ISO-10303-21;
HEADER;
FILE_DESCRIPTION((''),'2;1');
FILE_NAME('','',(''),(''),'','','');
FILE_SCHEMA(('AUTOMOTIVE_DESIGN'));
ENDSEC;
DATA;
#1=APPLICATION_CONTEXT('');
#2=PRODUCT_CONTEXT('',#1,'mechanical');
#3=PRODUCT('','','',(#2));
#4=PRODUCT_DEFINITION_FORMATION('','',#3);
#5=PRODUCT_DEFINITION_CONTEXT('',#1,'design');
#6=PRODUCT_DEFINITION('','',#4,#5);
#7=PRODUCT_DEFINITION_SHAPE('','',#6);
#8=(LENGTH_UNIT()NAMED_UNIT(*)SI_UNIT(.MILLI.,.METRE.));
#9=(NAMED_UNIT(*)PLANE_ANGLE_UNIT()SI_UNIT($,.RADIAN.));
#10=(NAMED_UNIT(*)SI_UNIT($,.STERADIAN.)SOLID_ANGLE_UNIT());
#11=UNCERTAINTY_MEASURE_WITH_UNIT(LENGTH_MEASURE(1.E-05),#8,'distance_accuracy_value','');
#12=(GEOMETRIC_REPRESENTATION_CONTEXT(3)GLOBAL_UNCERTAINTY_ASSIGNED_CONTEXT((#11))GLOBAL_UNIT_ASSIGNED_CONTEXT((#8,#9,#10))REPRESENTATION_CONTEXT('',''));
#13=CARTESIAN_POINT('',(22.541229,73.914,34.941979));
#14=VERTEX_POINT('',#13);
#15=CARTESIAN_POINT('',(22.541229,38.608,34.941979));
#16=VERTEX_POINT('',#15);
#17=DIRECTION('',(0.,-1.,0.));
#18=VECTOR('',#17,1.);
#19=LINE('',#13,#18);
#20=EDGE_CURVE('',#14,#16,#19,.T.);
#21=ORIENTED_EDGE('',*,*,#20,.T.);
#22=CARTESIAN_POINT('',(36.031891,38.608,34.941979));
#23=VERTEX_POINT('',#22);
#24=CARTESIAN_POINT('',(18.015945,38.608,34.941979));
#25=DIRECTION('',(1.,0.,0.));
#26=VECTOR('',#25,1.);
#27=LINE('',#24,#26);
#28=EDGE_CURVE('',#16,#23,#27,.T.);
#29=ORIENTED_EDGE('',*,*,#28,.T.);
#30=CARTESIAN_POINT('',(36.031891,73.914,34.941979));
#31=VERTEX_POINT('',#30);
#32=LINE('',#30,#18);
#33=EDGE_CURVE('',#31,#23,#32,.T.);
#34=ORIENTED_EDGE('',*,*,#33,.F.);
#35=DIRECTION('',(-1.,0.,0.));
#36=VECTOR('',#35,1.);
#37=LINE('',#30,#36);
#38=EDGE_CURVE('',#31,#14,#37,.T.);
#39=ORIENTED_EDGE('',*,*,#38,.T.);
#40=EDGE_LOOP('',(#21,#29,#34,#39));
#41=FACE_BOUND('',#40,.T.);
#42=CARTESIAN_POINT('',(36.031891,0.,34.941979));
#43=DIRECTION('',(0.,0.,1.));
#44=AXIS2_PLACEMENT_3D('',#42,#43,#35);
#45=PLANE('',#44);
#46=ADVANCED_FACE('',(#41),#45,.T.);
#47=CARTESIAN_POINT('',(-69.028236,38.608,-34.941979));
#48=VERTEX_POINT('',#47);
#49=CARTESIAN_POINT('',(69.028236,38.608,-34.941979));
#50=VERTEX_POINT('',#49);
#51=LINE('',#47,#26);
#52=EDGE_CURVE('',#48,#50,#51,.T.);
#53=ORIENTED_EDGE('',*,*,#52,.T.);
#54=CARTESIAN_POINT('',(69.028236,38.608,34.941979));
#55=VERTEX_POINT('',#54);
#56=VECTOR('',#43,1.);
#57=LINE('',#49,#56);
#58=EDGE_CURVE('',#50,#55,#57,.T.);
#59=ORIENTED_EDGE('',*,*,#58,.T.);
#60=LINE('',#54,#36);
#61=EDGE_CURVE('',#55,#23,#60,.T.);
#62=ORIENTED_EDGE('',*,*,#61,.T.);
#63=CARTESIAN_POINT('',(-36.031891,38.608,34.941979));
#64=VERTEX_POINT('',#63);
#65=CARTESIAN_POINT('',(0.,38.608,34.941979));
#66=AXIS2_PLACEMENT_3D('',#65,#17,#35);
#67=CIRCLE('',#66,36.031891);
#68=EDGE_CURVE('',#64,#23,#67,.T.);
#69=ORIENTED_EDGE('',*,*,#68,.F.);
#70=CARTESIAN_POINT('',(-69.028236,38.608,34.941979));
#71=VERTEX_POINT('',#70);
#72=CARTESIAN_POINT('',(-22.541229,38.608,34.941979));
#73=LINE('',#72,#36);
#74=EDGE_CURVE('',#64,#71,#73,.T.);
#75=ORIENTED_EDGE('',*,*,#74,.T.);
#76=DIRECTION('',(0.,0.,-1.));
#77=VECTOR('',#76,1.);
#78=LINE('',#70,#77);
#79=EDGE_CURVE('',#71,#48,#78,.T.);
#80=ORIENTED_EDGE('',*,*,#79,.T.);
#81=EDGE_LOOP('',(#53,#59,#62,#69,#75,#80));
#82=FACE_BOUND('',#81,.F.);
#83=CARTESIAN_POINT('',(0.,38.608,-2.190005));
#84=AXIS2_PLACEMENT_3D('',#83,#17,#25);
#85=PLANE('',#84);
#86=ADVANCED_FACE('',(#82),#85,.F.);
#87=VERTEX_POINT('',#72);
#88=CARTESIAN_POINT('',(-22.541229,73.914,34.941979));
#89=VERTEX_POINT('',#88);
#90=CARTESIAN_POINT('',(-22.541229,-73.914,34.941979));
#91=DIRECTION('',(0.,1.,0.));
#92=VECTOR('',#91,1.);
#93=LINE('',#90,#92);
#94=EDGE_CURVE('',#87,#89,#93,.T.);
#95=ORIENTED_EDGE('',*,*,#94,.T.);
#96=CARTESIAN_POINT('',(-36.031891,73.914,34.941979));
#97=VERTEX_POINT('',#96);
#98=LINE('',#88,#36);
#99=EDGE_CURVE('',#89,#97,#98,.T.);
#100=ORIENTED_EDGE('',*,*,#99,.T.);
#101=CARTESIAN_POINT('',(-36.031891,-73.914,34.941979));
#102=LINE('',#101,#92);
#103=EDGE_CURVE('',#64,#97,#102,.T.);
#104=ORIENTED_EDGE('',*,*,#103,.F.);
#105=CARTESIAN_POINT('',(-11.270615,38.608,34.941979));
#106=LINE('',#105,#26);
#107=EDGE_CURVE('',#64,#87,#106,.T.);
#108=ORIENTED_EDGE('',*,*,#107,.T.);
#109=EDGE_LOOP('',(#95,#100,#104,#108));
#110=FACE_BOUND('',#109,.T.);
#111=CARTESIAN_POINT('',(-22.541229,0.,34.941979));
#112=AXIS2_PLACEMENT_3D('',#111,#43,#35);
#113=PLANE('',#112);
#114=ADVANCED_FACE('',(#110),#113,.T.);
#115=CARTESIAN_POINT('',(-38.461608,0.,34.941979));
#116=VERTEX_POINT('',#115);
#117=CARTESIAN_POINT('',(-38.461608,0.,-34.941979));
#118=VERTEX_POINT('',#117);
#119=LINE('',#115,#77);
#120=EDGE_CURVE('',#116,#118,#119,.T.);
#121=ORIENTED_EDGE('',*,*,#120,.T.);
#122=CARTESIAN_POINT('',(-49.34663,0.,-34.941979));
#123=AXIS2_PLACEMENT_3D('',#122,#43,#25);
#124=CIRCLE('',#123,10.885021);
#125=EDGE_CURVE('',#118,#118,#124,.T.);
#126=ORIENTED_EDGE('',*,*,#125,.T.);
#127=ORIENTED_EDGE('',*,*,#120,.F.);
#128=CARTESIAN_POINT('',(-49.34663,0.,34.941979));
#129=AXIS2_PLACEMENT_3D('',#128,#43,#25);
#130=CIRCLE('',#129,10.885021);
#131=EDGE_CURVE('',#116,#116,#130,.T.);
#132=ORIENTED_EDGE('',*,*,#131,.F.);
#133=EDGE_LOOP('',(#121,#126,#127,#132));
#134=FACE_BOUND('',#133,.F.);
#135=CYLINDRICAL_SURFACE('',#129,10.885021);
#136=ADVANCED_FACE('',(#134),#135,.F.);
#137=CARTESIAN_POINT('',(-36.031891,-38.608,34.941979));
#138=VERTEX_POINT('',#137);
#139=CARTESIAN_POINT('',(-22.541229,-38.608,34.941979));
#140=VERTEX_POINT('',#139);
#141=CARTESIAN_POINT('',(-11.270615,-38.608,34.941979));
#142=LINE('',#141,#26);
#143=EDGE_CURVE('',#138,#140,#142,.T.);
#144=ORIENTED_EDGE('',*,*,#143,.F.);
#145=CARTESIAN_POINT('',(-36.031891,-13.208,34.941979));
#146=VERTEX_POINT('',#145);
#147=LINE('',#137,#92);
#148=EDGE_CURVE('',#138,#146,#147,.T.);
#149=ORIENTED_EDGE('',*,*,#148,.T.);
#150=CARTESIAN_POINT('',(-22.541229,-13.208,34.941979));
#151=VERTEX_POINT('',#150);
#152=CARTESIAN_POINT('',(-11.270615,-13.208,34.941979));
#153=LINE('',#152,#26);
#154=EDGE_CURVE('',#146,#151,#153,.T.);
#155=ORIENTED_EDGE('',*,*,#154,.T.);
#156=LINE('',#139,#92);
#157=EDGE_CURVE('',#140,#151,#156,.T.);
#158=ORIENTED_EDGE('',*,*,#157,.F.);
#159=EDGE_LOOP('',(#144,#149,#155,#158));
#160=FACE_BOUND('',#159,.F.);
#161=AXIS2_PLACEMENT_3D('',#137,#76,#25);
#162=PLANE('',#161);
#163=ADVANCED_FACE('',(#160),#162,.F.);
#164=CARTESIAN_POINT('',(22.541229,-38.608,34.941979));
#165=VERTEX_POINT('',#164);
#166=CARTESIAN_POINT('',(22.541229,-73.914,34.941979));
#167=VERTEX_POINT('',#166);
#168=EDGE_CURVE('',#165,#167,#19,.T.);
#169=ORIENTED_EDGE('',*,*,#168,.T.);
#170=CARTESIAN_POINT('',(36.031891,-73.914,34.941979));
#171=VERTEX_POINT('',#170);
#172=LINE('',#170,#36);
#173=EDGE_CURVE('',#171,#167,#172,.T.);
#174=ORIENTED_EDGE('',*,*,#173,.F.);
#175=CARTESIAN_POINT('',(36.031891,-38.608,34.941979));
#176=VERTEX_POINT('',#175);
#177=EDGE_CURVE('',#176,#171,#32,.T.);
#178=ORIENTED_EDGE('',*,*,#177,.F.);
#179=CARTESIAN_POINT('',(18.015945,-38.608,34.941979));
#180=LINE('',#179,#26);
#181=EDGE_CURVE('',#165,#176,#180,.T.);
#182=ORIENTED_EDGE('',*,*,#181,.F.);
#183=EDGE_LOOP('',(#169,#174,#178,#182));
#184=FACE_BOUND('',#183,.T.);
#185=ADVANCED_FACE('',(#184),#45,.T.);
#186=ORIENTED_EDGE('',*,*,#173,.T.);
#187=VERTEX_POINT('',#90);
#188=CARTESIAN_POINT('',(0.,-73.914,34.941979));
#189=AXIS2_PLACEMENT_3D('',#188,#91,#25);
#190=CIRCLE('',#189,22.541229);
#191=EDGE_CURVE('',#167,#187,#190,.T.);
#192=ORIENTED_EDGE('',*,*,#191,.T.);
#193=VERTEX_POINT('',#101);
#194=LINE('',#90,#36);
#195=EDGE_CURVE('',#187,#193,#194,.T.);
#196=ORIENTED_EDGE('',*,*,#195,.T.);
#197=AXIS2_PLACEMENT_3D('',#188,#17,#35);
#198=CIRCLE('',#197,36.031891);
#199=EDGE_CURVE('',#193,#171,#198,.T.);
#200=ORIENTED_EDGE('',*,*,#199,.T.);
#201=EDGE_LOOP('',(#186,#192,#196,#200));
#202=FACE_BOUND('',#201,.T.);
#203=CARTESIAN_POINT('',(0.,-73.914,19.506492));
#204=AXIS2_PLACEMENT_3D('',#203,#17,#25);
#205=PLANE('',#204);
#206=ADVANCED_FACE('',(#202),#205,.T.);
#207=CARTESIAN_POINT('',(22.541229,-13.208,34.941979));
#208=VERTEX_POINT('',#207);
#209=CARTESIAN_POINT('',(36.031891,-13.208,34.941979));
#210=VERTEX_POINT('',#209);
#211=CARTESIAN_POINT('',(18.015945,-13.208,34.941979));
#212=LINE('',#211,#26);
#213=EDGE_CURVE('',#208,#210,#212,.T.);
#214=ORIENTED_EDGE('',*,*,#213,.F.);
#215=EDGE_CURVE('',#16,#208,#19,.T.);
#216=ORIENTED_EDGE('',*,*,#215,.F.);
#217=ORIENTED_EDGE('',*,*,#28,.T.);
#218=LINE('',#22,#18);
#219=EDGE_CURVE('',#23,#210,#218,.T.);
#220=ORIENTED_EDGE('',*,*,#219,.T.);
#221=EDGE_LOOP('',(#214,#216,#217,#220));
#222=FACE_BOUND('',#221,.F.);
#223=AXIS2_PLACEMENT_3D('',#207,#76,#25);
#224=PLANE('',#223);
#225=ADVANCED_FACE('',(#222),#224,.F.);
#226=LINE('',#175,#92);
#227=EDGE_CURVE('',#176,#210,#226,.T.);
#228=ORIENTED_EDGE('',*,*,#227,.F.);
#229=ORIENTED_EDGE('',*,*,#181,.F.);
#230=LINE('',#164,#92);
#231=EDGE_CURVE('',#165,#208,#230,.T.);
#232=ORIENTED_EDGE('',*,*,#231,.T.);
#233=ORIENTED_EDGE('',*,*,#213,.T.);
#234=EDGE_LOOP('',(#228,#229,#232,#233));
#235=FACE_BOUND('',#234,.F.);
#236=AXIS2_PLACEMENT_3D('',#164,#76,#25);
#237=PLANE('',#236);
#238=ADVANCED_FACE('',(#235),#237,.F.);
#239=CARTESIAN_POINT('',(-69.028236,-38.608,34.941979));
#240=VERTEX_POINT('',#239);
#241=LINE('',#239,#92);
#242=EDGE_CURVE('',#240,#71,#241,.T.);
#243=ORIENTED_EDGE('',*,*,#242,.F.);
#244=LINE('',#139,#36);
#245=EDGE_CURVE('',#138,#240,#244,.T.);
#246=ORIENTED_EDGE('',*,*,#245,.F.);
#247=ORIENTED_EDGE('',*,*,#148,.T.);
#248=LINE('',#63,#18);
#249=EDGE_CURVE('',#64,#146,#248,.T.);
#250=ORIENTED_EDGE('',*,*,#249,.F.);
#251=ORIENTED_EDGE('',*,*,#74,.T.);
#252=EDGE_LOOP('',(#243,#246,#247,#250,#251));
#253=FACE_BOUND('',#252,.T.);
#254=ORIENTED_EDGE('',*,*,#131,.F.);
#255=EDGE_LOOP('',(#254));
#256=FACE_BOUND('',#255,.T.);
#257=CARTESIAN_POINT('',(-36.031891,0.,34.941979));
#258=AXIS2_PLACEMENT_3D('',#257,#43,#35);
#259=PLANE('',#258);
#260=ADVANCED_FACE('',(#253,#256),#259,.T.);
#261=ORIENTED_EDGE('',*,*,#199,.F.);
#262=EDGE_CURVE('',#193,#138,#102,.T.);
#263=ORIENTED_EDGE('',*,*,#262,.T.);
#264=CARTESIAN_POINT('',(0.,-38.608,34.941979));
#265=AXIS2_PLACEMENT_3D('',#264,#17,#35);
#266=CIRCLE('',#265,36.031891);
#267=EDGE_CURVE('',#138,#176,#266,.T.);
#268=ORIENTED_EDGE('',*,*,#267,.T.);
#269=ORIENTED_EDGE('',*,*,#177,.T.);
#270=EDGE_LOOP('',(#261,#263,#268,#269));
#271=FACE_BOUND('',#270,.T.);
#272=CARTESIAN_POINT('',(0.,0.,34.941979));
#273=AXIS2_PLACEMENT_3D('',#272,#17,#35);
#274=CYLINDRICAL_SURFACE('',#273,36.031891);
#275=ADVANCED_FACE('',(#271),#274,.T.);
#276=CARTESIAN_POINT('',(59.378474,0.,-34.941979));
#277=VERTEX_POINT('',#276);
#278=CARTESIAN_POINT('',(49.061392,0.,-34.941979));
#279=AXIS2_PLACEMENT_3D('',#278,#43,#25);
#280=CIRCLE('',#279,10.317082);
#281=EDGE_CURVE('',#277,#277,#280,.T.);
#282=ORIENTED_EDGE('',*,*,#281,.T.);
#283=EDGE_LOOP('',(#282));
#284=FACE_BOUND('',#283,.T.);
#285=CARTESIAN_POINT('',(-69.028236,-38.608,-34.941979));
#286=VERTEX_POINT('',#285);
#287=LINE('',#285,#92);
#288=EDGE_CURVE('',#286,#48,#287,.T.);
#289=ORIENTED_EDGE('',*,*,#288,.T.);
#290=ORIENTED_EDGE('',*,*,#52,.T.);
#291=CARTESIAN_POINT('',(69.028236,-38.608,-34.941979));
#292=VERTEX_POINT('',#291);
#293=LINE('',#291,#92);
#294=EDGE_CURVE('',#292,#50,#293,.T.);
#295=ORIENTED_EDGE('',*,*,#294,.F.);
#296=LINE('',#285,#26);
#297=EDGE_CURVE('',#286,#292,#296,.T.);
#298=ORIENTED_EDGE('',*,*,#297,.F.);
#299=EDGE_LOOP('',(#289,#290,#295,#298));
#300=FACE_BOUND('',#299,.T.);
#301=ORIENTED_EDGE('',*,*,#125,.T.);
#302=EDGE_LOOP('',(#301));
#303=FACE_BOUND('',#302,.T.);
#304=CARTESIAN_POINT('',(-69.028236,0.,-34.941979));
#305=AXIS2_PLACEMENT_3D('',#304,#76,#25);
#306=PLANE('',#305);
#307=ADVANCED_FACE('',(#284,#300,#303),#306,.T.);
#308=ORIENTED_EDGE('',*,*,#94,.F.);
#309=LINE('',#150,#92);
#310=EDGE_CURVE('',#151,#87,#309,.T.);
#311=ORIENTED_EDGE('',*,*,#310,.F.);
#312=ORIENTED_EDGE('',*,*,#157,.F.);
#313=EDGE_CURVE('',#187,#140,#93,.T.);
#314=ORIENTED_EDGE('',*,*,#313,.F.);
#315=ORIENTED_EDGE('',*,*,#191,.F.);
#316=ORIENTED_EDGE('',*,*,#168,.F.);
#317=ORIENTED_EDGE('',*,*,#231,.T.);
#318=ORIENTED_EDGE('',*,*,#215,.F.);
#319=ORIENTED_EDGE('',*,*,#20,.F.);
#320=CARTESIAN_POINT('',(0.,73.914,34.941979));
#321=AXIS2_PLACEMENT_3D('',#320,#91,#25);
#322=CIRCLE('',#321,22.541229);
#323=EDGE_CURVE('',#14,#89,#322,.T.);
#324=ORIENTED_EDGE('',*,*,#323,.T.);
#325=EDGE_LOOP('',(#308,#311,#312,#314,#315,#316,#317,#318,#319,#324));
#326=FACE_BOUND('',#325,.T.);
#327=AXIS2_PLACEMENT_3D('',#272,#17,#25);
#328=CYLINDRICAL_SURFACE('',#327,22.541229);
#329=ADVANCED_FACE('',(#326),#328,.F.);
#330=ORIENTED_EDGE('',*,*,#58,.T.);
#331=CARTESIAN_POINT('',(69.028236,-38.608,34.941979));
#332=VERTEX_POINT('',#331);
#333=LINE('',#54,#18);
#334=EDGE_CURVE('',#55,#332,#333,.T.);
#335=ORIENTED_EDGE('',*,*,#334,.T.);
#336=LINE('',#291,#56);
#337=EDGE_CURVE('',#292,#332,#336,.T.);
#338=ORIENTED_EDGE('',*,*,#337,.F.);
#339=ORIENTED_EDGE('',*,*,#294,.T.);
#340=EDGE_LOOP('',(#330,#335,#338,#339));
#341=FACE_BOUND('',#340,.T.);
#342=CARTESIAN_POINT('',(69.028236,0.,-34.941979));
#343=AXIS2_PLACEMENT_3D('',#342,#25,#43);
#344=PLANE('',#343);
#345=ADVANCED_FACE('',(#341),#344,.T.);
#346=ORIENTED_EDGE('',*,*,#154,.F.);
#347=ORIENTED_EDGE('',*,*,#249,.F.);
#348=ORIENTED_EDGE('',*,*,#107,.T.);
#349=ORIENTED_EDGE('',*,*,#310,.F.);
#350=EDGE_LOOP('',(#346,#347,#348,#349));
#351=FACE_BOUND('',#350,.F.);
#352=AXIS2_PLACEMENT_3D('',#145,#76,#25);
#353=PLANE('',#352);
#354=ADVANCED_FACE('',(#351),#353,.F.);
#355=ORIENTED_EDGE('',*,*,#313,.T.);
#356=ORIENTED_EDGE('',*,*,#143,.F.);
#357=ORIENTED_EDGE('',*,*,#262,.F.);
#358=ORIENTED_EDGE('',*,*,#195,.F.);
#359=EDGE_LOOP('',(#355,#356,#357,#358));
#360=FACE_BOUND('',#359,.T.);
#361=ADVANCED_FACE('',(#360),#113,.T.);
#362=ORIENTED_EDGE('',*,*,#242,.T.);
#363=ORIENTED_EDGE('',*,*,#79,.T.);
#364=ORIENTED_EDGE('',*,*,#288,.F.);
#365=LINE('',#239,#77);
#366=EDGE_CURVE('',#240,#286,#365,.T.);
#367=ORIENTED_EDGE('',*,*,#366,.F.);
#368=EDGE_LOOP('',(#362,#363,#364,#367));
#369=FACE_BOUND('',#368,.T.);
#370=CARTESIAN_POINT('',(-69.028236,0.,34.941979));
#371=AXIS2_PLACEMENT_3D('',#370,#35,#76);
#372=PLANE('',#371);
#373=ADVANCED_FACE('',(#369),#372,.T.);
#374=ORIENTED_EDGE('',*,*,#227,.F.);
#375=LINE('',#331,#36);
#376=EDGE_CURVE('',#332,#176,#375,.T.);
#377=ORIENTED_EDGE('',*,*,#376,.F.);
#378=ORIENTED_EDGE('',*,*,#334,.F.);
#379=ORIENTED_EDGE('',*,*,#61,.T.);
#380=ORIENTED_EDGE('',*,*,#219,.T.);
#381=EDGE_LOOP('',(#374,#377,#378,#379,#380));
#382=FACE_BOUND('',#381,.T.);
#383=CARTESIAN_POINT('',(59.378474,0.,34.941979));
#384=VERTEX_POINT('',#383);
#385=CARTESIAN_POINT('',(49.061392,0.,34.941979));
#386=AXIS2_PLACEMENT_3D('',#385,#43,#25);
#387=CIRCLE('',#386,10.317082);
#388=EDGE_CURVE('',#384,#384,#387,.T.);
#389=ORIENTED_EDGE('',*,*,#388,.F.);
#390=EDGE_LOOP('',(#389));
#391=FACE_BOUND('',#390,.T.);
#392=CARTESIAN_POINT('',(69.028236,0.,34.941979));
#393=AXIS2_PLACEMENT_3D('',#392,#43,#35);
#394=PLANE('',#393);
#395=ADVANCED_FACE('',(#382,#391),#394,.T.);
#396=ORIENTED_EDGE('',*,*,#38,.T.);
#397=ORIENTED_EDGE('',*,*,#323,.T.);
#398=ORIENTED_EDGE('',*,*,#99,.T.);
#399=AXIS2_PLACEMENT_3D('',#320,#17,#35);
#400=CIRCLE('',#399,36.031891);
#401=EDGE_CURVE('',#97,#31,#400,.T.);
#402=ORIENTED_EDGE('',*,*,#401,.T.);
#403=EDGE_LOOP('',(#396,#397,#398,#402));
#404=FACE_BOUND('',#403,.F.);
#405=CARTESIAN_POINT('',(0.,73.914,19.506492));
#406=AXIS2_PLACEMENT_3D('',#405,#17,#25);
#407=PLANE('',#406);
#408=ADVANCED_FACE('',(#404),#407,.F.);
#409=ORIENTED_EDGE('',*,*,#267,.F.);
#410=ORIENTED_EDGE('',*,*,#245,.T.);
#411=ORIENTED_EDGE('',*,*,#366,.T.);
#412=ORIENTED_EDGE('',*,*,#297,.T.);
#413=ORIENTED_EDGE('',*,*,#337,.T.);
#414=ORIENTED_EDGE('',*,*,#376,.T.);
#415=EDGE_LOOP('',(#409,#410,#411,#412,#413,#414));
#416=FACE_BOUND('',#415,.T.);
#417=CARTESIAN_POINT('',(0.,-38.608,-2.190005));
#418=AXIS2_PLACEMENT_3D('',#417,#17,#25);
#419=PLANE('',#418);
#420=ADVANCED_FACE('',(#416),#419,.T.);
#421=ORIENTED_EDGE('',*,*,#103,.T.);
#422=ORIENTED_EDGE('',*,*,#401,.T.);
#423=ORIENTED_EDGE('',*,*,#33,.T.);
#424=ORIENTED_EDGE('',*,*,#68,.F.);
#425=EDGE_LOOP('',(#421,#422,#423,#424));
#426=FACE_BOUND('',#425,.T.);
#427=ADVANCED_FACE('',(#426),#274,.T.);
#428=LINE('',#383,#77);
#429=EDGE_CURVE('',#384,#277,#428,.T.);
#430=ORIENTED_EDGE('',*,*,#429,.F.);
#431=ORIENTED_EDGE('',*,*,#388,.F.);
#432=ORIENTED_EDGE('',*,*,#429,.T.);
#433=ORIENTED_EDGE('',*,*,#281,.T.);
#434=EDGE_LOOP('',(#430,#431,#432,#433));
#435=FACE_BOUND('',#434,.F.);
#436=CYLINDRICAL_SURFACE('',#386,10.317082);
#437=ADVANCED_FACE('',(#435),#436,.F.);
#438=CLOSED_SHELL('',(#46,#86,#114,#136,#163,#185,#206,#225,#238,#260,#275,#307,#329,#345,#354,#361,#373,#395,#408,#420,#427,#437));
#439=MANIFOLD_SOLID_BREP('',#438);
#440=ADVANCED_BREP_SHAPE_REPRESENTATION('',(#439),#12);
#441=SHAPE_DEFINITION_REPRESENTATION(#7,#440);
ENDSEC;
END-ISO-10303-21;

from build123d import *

# Parameters (mm, degrees)
F1_DEPTH = 73.914
F2_DEPTH = 38.608
F3_DEPTH = 25.4
F4_DEPTH = 87.123
F5_R     = 10.8850211106
F5_R_2   = 10.3170822269
F6_DEPTH = 69.8849575052


with BuildPart() as f1:
    # F0 (on Front) → F1 (new body, symmetric)
    with BuildSketch(Plane.XZ):
        with BuildLine():
            ThreePointArc((-36.0318907806, 34.9419787526), (0, -1.089912028), (36.0318907806, 34.9419787526))
            Line((36.0318907806, 34.9419787526), (22.5412292513, 34.9419787526))
            ThreePointArc((22.5412292513, 34.9419787526), (0, 12.4007495013), (-22.5412292513, 34.9419787526))
            Line((-22.5412292513, 34.9419787526), (-36.0318907806, 34.9419787526))
        make_face()
    extrude(amount=F1_DEPTH, both=True)

    # F0 (on Front) → F2 (join, symmetric)
    with BuildSketch(Plane.XZ):
        with BuildLine():
            Line((69.0282359719, -34.9419787526), (69.0282359719, 34.9419787526))
            Line((69.0282359719, 34.9419787526), (36.0318907806, 34.9419787526))
            ThreePointArc((36.0318907806, 34.9419787526), (0, -1.089912028), (-36.0318907806, 34.9419787526))
            Line((-36.0318907806, 34.9419787526), (-69.0282359719, 34.9419787526))
            Line((-69.0282359719, 34.9419787526), (-69.0282359719, -34.9419787526))
            Line((-69.0282359719, -34.9419787526), (69.0282359719, -34.9419787526))
        make_face()
        with BuildLine():
            ThreePointArc((-36.0318907806, 34.9419787526), (0, -1.089912028), (36.0318907806, 34.9419787526))
            Line((36.0318907806, 34.9419787526), (22.5412292513, 34.9419787526))
            ThreePointArc((22.5412292513, 34.9419787526), (0, 12.4007495013), (-22.5412292513, 34.9419787526))
            Line((-22.5412292513, 34.9419787526), (-36.0318907806, 34.9419787526))
        make_face()
        with BuildLine():
            Line((22.5412292513, 34.9419787526), (36.0318907806, 34.9419787526))
            ThreePointArc((36.0318907806, 34.9419787526), (0, 70.9738695332), (-36.0318907806, 34.9419787526))
            Line((-36.0318907806, 34.9419787526), (-22.5412292513, 34.9419787526))
            ThreePointArc((-22.5412292513, 34.9419787526), (0, 57.4832080039), (22.5412292513, 34.9419787526))
        make_face()
    extrude(amount=F2_DEPTH, both=True)

    # F3 (cut): a face of the model
    f3_faces = [f1.faces().sort_by_distance(p)[0] for p in [
        (29.286560016, -38.608, 35.747676324),
    ]]
    extrude(f3_faces, amount=-F3_DEPTH, mode=Mode.SUBTRACT)

    # F4 (cut, through all): a face of the model
    f4_faces = [f1.faces().sort_by_distance(p)[0] for p in [
        (29.286560016, -13.208, 35.747676324),
    ]]
    extrude(f4_faces, amount=-F4_DEPTH, mode=Mode.SUBTRACT)

    # F5 (on face) → F6 (cut, through all)
    with BuildSketch(Plane.XY.offset(34.9419787526)):
        with Locations((-49.3466295302, 0)):
            Circle(F5_R)
        with Locations((49.0613915026, 0)):
            Circle(F5_R_2)
    extrude(amount=-F6_DEPTH, mode=Mode.SUBTRACT)


solid = f1.part
